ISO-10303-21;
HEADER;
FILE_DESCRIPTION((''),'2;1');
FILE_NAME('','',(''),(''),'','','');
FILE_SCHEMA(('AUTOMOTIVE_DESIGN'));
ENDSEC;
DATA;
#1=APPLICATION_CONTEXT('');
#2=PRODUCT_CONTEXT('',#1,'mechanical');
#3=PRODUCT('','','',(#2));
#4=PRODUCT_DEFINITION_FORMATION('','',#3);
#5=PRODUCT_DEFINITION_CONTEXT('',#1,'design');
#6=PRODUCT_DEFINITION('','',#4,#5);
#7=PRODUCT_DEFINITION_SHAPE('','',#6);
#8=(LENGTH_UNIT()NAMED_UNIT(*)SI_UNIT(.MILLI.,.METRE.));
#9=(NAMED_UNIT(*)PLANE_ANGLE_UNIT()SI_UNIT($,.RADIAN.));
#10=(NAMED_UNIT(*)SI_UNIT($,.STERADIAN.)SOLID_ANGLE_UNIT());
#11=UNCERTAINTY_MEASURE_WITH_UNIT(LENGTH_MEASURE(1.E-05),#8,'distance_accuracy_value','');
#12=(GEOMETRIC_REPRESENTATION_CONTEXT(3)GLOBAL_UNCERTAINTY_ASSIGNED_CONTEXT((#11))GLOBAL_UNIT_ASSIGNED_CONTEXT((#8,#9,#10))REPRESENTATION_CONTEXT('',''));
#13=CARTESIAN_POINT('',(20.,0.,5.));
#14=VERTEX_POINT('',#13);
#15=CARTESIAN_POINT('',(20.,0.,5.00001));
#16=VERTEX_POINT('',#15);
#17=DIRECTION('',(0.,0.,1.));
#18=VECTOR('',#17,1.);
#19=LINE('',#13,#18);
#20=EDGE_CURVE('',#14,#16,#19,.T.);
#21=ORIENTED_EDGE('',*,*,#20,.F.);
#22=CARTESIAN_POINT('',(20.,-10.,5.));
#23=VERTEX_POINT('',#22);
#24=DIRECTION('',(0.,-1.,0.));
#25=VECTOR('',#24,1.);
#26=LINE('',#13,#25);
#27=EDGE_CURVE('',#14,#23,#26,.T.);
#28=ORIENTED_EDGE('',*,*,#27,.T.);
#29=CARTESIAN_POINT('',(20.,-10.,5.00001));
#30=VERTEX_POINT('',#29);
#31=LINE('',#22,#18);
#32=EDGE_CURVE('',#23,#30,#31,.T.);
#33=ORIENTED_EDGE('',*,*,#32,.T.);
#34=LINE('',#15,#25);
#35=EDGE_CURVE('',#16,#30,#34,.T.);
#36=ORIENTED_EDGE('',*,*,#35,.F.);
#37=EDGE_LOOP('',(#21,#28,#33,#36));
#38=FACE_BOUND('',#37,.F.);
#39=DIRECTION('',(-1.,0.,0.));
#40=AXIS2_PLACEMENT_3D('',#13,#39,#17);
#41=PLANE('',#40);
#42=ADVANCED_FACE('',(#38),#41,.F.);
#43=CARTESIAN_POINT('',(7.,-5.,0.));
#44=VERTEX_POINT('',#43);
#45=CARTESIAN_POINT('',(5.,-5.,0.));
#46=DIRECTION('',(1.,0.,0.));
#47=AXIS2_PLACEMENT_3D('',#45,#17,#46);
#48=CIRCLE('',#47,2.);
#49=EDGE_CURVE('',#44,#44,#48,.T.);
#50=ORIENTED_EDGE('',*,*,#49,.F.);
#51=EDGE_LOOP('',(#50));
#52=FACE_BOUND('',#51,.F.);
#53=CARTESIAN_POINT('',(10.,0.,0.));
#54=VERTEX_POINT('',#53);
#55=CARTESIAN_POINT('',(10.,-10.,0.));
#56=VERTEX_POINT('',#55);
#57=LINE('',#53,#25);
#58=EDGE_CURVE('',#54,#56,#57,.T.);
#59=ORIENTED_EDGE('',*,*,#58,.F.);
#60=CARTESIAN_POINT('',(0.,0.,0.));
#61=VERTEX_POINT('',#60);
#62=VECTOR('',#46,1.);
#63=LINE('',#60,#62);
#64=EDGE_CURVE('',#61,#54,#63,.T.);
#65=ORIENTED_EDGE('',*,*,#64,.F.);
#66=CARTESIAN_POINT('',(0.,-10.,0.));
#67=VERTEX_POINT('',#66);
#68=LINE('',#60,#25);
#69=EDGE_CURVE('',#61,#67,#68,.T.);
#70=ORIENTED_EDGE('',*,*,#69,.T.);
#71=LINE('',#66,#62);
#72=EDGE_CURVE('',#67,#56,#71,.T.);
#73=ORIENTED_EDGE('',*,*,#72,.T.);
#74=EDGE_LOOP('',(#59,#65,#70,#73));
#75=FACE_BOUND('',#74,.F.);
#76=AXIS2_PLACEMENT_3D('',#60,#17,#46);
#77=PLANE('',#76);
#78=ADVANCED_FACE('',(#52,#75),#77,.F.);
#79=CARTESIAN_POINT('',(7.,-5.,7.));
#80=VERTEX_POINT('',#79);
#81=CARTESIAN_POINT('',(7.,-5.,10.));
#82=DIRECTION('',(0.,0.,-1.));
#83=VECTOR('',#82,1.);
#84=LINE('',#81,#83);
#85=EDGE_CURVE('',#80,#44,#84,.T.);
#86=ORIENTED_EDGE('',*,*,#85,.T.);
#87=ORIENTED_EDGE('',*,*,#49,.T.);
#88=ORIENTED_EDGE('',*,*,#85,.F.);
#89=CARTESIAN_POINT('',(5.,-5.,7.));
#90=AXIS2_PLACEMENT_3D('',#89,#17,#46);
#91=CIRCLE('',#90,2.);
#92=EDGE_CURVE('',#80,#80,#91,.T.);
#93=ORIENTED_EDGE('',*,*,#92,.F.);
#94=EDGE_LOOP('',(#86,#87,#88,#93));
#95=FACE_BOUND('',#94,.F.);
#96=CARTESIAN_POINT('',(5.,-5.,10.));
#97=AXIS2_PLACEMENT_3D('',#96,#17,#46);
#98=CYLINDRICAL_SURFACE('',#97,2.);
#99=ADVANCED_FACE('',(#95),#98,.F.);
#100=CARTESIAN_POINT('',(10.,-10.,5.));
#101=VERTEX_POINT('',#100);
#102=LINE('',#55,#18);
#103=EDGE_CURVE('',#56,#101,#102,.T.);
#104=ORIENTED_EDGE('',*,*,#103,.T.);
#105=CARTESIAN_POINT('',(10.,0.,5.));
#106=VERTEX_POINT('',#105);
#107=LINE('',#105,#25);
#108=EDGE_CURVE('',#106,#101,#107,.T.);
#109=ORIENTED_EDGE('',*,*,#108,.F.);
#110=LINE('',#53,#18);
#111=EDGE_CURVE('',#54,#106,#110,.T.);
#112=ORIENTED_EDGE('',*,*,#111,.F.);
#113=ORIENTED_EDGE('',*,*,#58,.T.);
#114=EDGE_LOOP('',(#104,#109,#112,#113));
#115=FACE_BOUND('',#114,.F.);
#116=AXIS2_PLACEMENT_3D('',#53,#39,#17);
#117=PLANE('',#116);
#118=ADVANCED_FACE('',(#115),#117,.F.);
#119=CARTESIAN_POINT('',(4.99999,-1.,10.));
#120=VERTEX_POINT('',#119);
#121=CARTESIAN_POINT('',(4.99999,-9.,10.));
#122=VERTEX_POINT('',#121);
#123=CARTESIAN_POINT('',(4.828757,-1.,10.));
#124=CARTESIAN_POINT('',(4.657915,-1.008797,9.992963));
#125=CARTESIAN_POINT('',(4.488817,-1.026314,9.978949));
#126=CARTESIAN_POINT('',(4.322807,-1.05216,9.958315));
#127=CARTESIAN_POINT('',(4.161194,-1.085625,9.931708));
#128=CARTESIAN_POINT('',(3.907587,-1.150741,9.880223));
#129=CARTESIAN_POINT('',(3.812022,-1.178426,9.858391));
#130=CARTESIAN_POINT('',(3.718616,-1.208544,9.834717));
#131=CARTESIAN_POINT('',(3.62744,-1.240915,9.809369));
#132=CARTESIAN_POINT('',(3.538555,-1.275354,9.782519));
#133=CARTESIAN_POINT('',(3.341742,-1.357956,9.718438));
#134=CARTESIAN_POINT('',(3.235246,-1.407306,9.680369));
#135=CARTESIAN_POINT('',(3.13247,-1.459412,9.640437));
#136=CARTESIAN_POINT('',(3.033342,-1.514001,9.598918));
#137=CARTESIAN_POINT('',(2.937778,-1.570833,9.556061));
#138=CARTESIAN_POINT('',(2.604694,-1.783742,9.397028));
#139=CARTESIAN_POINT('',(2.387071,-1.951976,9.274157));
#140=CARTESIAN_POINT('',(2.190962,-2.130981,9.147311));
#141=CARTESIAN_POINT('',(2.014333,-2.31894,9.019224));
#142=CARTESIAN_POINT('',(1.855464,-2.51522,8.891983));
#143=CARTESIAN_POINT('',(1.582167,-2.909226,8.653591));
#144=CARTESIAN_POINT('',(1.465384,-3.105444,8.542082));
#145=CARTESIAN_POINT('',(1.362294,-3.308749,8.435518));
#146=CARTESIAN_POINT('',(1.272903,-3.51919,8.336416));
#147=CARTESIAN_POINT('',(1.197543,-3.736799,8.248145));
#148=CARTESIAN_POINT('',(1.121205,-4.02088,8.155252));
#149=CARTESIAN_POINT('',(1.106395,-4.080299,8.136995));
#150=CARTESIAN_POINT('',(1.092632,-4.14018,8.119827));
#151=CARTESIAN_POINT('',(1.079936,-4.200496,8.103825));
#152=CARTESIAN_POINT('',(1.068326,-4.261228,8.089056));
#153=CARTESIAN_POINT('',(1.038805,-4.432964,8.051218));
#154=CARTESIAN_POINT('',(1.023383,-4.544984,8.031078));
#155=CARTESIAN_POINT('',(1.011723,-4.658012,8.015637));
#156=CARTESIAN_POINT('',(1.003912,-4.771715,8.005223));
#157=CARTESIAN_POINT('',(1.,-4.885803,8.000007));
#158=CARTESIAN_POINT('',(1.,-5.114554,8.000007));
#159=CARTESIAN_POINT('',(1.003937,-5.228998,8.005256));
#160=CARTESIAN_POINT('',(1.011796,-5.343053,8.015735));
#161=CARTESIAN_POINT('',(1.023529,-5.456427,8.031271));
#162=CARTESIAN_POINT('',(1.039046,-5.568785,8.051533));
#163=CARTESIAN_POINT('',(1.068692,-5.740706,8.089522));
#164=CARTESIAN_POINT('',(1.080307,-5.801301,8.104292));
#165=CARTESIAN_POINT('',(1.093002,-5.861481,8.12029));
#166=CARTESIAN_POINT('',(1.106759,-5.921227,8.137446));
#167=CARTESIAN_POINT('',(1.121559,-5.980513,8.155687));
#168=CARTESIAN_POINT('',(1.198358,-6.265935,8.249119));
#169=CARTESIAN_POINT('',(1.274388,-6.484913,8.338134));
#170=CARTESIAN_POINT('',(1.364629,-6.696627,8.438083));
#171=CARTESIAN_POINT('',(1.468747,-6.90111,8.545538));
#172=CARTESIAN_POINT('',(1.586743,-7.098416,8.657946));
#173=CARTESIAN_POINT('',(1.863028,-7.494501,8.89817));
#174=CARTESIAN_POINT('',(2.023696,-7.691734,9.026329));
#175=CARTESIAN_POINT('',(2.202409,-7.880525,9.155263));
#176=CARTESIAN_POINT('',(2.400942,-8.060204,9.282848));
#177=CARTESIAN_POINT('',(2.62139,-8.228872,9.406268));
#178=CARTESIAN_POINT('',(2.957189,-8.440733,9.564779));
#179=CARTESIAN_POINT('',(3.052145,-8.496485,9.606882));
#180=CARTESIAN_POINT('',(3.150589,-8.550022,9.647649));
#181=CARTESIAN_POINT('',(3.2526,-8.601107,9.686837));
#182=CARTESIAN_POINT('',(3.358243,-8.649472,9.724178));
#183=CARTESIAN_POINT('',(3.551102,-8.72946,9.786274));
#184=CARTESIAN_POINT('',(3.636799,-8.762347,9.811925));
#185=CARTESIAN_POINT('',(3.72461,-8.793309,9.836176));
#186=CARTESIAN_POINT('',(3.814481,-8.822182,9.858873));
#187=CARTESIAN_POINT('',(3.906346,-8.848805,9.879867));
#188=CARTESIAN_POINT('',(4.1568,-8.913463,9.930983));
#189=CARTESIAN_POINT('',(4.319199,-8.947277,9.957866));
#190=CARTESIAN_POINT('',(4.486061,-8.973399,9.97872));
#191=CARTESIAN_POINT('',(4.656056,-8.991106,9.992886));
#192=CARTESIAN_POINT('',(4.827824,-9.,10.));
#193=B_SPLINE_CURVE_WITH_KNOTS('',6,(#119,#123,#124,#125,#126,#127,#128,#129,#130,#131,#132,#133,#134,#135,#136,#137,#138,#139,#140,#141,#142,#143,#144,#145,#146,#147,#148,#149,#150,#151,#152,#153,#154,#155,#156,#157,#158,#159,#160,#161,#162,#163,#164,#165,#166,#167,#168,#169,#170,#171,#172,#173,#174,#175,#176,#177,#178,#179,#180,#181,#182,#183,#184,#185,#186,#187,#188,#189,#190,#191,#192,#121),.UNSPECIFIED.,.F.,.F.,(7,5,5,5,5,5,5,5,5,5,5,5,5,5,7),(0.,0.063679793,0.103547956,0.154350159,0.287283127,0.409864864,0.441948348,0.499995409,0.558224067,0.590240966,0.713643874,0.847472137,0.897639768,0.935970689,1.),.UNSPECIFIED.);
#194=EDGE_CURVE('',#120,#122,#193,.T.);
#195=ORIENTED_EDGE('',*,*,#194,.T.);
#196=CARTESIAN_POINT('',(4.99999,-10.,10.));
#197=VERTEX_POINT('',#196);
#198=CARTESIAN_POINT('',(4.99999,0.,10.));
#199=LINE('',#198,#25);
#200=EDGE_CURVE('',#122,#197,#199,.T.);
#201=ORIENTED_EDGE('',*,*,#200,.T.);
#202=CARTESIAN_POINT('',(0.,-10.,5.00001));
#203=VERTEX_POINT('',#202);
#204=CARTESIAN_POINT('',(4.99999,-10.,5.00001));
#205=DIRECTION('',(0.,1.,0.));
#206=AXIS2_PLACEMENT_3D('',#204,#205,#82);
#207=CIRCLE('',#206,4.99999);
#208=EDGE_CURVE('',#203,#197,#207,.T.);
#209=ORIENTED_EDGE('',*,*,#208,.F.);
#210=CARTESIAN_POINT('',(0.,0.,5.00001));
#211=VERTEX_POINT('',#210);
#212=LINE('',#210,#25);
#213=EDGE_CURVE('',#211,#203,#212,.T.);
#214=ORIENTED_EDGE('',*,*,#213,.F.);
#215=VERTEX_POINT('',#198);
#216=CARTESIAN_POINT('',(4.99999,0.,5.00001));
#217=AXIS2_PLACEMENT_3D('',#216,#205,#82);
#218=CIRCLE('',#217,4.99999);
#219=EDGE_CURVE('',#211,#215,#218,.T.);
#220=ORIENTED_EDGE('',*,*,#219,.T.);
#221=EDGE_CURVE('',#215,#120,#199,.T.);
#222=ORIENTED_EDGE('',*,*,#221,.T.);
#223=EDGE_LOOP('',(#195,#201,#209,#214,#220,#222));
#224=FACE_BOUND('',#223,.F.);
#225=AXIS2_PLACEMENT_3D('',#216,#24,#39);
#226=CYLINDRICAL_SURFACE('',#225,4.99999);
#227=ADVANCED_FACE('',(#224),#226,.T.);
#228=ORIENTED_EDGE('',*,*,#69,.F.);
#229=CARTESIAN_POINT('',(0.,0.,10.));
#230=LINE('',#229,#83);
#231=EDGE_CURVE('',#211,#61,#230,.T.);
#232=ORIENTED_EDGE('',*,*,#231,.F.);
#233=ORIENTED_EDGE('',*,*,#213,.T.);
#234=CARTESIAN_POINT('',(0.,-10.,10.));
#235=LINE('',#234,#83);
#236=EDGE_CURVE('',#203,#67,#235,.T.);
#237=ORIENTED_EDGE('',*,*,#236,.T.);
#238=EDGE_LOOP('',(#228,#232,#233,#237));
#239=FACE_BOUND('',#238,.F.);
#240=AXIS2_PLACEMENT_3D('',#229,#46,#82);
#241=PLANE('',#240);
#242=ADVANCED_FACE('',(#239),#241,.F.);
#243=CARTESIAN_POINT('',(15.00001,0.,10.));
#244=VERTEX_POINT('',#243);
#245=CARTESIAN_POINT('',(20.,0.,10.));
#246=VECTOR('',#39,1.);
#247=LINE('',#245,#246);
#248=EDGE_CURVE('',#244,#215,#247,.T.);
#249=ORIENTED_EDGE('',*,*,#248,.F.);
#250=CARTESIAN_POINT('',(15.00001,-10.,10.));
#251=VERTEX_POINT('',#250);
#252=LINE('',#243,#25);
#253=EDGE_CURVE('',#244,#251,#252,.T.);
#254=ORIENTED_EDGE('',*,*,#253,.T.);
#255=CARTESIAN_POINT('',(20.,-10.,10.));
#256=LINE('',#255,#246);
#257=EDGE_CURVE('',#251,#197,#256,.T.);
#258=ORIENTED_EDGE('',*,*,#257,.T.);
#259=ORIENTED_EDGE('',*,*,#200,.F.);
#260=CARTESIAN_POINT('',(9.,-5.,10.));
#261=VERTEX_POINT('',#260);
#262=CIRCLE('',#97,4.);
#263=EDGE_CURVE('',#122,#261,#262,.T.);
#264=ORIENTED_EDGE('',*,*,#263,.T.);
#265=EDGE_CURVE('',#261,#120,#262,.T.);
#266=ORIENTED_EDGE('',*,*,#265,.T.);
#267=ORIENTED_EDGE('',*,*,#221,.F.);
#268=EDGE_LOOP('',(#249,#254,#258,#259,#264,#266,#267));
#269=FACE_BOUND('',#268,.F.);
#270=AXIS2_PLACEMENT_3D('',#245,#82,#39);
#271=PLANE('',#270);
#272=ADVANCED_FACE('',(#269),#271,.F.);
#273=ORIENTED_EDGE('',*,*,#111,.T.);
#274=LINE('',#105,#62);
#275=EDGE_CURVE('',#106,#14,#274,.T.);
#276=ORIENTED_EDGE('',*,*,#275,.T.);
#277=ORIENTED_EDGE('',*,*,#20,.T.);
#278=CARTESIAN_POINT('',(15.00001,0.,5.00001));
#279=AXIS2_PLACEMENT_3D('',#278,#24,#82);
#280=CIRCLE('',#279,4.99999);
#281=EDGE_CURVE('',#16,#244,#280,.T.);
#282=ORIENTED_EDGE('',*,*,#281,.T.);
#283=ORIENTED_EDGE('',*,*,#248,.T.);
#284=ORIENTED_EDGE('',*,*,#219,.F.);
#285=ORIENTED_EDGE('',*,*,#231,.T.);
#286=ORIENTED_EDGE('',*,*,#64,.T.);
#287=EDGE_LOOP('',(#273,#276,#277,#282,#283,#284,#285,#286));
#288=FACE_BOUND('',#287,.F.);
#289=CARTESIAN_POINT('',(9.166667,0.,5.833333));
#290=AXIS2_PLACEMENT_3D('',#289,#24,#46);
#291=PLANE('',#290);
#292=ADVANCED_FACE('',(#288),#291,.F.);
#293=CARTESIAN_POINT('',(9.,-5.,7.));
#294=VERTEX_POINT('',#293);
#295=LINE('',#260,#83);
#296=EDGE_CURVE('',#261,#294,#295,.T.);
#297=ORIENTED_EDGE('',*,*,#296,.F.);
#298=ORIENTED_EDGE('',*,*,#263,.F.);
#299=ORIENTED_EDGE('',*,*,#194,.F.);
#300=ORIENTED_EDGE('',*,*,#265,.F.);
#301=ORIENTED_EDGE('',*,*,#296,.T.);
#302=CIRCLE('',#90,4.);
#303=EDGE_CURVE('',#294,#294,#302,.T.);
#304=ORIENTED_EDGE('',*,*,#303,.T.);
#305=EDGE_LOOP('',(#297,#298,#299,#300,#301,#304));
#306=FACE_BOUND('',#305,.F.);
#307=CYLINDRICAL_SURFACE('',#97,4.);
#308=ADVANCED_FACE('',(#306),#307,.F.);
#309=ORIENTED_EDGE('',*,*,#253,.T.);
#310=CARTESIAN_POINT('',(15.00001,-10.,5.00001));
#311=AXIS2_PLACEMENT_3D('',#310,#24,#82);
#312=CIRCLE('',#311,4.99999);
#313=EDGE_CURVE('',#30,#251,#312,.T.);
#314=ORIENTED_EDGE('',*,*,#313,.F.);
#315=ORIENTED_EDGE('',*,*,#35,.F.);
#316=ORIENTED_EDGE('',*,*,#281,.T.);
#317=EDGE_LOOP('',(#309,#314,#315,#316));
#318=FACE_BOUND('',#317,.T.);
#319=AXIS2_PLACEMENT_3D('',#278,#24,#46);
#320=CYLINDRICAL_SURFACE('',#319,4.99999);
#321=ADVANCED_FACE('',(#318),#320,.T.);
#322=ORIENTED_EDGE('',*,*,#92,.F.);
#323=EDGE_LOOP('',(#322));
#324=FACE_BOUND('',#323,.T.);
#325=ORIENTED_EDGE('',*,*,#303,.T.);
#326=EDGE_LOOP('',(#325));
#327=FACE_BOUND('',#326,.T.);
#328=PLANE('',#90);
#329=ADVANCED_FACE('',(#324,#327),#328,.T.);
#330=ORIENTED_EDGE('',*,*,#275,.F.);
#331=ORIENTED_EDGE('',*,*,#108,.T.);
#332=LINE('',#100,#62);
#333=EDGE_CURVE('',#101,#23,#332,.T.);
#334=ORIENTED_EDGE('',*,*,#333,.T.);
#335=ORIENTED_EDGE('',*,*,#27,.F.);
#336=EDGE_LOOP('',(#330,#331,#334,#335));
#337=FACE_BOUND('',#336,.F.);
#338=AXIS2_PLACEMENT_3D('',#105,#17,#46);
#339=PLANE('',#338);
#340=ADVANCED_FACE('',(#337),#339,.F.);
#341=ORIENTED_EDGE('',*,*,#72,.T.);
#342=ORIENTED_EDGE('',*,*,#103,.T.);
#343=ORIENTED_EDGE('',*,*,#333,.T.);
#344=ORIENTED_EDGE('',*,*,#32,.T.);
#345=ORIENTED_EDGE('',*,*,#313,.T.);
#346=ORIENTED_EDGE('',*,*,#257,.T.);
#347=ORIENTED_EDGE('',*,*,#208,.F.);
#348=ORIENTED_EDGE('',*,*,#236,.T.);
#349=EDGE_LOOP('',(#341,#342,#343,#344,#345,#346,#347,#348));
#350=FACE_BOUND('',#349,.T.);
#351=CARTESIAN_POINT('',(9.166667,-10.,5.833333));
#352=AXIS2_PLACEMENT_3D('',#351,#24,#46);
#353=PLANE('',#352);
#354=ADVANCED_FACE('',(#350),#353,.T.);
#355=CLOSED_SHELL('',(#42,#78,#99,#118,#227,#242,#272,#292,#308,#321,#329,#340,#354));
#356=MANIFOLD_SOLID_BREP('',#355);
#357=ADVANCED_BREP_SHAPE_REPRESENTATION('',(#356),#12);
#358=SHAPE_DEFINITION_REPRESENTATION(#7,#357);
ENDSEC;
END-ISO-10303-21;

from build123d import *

# Parameters (mm, degrees)
F1_DEPTH = 10
F2_R     = 4.99999
F3_R     = 2
F4_DEPTH = 25
F5_R     = 4
F6_DEPTH = 3


# Not quite as in the source:
# - a fillet or chamfer is up to 0.001 mm smaller than in the source, because OpenCascade refuses the exact size


with BuildPart() as f1:
    # F0 (on Front) → F1 (new body)
    with BuildSketch(Plane.XZ):
        Polygon((0, 10), (0, 0), (10, 0), (10, 5), (20, 5), (20, 10), align=None)
    extrude(amount=F1_DEPTH)

    # F2 (radius 5 in the source; OpenCascade refuses exactly that, so slightly less here)
    f2_edges = [f1.edges().sort_by_distance(p)[0] for p in [
        (20, -5, 10),
        (0, -5, 10),
    ]]
    fillet(f2_edges, radius=F2_R)

    # F3 (on face) → F4 (cut)
    with BuildSketch(Plane.XY.offset(10)):
        with Locations((5, -5)):
            Circle(F3_R)
    extrude(amount=-F4_DEPTH, mode=Mode.SUBTRACT)

    # F5 (on face) → F6 (cut)
    with BuildSketch(Plane.XY.offset(10)):
        with Locations((5, -5)):
            Circle(F5_R)
    extrude(amount=-F6_DEPTH, mode=Mode.SUBTRACT)


solid = f1.part
